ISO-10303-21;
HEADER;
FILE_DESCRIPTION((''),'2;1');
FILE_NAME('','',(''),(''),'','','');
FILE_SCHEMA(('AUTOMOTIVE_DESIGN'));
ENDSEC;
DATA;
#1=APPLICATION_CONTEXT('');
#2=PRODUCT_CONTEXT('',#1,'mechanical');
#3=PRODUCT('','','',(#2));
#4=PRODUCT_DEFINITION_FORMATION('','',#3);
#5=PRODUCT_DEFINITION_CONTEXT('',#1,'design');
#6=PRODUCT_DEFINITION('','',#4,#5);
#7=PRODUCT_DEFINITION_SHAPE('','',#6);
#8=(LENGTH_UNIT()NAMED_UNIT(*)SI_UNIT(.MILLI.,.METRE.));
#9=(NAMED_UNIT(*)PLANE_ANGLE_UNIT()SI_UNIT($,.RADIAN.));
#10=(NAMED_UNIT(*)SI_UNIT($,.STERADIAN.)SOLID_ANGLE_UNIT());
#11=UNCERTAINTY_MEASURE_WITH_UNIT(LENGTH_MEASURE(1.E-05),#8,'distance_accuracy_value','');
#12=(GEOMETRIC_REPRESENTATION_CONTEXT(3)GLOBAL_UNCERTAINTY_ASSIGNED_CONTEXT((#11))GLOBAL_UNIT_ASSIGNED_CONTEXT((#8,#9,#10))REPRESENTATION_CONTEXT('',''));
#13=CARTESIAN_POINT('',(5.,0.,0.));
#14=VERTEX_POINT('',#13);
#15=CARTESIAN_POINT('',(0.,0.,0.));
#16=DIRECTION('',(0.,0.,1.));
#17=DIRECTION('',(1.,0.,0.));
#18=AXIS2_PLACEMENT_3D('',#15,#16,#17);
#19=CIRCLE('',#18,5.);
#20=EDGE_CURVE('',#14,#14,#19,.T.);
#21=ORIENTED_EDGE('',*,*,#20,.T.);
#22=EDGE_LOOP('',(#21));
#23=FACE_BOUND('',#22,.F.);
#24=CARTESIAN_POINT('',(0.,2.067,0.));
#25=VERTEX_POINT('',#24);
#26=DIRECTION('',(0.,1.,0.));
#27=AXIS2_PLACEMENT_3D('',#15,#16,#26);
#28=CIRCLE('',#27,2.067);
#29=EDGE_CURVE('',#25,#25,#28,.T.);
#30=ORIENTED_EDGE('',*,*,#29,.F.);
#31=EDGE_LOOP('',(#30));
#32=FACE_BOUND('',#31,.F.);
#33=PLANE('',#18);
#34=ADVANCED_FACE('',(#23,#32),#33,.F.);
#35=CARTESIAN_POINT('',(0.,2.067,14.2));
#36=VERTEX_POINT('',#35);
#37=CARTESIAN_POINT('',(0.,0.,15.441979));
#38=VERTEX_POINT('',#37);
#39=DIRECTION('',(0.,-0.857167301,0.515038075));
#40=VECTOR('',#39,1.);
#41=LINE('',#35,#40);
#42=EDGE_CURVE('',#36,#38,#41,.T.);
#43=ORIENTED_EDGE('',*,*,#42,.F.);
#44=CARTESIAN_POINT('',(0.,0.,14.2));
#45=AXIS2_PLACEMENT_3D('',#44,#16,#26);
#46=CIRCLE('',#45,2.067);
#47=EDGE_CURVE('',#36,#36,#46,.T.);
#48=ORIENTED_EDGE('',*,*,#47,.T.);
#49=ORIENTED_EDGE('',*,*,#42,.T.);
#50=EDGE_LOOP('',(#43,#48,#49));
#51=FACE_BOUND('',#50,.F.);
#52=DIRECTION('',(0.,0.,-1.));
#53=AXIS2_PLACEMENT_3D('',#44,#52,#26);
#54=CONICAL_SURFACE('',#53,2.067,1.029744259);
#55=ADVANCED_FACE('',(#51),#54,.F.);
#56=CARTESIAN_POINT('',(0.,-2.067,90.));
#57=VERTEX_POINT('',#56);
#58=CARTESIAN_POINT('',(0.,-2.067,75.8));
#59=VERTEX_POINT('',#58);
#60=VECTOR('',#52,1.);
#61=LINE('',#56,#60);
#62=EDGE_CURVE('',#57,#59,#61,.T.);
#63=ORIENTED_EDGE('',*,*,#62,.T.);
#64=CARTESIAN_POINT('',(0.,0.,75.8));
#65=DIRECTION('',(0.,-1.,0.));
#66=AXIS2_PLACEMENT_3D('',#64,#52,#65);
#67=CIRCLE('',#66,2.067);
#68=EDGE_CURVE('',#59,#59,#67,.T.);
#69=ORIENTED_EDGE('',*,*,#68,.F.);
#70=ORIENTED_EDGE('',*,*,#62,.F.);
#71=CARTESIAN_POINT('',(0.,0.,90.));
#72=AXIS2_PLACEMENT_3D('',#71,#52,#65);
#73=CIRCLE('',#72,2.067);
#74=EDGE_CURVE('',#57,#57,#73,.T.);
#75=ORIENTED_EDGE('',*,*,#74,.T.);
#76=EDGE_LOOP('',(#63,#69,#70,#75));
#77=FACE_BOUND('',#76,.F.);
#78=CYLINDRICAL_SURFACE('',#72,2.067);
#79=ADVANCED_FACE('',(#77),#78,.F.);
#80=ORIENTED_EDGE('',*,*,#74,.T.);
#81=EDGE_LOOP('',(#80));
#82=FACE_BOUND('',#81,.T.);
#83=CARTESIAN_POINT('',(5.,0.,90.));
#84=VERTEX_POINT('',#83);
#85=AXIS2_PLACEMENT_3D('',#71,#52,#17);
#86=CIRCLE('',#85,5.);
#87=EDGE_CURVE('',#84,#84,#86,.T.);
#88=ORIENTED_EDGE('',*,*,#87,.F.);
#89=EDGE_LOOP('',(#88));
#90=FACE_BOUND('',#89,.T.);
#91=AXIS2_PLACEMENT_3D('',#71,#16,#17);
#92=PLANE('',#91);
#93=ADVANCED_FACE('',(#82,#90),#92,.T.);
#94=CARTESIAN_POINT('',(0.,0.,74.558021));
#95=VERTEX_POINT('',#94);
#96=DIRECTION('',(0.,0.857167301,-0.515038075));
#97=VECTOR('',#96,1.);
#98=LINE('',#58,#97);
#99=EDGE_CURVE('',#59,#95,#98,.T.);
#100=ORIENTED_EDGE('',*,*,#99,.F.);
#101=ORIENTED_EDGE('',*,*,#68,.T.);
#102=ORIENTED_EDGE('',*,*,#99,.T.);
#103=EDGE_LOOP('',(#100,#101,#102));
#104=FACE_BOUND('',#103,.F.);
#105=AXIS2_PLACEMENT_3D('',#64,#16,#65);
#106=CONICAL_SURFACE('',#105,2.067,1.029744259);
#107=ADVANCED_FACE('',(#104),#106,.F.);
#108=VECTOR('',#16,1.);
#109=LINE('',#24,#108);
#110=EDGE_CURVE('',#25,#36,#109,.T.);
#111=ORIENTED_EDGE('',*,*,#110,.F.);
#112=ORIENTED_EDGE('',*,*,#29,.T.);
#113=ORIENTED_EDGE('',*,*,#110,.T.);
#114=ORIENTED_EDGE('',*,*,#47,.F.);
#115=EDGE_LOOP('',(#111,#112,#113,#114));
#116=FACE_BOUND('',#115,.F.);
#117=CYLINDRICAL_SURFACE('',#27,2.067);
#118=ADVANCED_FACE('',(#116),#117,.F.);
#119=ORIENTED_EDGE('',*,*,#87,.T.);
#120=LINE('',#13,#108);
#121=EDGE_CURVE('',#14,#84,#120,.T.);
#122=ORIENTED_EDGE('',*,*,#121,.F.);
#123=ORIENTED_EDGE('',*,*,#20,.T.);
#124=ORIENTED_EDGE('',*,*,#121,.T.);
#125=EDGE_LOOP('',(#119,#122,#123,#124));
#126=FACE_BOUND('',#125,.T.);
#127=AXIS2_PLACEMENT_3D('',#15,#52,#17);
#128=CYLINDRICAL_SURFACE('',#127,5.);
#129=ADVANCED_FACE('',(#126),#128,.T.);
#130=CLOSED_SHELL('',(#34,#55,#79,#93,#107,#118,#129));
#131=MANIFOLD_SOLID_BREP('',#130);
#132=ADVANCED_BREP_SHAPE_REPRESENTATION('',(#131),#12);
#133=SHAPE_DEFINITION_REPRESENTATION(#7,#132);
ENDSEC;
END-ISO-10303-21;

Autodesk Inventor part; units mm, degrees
ref_plane "YZ Plane" through (0, 0, 0) normal (1, 0, 0) x (0, 1, 0)
ref_plane "XZ Plane" through (0, 0, 0) normal (0, 1, 0) x (-1, 0, 0)
ref_plane "XY Plane" through (0, 0, 0) normal (0, 0, 1) x (1, 0, 0)
sketch "Skizze1" plane through (0, 0, 0) normal (0, 0, 1) x (1, 0, 0)
  line L0 (-7, 0) -> (7, 0) projected
  line L1 (0, -7) -> (0, 7) projected
  circle A0 centre (0, 0) radius 5
  dimension "d0" = 10
extrude "Extrusion1" add sketch "Skizze1" along normal blind 90
sketch "Skizze2" plane through (0, 0, 90) normal (0, 0, 1) x (1, 0, 0)
  point P0 (0, 0)
  point P1 (0, 0)
hole "Bohrung1" at (0, 0, 90) direction (0, 0, -1) diameter 4.134 depth 14.2 tip angle 118 thread size "M5x0.8" class "6H" standard "ISO Metric profile"
sketch "Skizze3" plane through (0, 0, 0) normal (0, 0, -1) x (-1, 0, 0)
  point P0 (0, 0)
  point P1 (-2.4827, -3.6773)
hole "Bohrung2" at (0, 0, 0) direction (0, 0, 1) diameter 4.134 depth 14.2 tip angle 118 thread size "M5x0.8" class "6H" standard "ISO Metric profile"
properties part number "24_0497_0020"
